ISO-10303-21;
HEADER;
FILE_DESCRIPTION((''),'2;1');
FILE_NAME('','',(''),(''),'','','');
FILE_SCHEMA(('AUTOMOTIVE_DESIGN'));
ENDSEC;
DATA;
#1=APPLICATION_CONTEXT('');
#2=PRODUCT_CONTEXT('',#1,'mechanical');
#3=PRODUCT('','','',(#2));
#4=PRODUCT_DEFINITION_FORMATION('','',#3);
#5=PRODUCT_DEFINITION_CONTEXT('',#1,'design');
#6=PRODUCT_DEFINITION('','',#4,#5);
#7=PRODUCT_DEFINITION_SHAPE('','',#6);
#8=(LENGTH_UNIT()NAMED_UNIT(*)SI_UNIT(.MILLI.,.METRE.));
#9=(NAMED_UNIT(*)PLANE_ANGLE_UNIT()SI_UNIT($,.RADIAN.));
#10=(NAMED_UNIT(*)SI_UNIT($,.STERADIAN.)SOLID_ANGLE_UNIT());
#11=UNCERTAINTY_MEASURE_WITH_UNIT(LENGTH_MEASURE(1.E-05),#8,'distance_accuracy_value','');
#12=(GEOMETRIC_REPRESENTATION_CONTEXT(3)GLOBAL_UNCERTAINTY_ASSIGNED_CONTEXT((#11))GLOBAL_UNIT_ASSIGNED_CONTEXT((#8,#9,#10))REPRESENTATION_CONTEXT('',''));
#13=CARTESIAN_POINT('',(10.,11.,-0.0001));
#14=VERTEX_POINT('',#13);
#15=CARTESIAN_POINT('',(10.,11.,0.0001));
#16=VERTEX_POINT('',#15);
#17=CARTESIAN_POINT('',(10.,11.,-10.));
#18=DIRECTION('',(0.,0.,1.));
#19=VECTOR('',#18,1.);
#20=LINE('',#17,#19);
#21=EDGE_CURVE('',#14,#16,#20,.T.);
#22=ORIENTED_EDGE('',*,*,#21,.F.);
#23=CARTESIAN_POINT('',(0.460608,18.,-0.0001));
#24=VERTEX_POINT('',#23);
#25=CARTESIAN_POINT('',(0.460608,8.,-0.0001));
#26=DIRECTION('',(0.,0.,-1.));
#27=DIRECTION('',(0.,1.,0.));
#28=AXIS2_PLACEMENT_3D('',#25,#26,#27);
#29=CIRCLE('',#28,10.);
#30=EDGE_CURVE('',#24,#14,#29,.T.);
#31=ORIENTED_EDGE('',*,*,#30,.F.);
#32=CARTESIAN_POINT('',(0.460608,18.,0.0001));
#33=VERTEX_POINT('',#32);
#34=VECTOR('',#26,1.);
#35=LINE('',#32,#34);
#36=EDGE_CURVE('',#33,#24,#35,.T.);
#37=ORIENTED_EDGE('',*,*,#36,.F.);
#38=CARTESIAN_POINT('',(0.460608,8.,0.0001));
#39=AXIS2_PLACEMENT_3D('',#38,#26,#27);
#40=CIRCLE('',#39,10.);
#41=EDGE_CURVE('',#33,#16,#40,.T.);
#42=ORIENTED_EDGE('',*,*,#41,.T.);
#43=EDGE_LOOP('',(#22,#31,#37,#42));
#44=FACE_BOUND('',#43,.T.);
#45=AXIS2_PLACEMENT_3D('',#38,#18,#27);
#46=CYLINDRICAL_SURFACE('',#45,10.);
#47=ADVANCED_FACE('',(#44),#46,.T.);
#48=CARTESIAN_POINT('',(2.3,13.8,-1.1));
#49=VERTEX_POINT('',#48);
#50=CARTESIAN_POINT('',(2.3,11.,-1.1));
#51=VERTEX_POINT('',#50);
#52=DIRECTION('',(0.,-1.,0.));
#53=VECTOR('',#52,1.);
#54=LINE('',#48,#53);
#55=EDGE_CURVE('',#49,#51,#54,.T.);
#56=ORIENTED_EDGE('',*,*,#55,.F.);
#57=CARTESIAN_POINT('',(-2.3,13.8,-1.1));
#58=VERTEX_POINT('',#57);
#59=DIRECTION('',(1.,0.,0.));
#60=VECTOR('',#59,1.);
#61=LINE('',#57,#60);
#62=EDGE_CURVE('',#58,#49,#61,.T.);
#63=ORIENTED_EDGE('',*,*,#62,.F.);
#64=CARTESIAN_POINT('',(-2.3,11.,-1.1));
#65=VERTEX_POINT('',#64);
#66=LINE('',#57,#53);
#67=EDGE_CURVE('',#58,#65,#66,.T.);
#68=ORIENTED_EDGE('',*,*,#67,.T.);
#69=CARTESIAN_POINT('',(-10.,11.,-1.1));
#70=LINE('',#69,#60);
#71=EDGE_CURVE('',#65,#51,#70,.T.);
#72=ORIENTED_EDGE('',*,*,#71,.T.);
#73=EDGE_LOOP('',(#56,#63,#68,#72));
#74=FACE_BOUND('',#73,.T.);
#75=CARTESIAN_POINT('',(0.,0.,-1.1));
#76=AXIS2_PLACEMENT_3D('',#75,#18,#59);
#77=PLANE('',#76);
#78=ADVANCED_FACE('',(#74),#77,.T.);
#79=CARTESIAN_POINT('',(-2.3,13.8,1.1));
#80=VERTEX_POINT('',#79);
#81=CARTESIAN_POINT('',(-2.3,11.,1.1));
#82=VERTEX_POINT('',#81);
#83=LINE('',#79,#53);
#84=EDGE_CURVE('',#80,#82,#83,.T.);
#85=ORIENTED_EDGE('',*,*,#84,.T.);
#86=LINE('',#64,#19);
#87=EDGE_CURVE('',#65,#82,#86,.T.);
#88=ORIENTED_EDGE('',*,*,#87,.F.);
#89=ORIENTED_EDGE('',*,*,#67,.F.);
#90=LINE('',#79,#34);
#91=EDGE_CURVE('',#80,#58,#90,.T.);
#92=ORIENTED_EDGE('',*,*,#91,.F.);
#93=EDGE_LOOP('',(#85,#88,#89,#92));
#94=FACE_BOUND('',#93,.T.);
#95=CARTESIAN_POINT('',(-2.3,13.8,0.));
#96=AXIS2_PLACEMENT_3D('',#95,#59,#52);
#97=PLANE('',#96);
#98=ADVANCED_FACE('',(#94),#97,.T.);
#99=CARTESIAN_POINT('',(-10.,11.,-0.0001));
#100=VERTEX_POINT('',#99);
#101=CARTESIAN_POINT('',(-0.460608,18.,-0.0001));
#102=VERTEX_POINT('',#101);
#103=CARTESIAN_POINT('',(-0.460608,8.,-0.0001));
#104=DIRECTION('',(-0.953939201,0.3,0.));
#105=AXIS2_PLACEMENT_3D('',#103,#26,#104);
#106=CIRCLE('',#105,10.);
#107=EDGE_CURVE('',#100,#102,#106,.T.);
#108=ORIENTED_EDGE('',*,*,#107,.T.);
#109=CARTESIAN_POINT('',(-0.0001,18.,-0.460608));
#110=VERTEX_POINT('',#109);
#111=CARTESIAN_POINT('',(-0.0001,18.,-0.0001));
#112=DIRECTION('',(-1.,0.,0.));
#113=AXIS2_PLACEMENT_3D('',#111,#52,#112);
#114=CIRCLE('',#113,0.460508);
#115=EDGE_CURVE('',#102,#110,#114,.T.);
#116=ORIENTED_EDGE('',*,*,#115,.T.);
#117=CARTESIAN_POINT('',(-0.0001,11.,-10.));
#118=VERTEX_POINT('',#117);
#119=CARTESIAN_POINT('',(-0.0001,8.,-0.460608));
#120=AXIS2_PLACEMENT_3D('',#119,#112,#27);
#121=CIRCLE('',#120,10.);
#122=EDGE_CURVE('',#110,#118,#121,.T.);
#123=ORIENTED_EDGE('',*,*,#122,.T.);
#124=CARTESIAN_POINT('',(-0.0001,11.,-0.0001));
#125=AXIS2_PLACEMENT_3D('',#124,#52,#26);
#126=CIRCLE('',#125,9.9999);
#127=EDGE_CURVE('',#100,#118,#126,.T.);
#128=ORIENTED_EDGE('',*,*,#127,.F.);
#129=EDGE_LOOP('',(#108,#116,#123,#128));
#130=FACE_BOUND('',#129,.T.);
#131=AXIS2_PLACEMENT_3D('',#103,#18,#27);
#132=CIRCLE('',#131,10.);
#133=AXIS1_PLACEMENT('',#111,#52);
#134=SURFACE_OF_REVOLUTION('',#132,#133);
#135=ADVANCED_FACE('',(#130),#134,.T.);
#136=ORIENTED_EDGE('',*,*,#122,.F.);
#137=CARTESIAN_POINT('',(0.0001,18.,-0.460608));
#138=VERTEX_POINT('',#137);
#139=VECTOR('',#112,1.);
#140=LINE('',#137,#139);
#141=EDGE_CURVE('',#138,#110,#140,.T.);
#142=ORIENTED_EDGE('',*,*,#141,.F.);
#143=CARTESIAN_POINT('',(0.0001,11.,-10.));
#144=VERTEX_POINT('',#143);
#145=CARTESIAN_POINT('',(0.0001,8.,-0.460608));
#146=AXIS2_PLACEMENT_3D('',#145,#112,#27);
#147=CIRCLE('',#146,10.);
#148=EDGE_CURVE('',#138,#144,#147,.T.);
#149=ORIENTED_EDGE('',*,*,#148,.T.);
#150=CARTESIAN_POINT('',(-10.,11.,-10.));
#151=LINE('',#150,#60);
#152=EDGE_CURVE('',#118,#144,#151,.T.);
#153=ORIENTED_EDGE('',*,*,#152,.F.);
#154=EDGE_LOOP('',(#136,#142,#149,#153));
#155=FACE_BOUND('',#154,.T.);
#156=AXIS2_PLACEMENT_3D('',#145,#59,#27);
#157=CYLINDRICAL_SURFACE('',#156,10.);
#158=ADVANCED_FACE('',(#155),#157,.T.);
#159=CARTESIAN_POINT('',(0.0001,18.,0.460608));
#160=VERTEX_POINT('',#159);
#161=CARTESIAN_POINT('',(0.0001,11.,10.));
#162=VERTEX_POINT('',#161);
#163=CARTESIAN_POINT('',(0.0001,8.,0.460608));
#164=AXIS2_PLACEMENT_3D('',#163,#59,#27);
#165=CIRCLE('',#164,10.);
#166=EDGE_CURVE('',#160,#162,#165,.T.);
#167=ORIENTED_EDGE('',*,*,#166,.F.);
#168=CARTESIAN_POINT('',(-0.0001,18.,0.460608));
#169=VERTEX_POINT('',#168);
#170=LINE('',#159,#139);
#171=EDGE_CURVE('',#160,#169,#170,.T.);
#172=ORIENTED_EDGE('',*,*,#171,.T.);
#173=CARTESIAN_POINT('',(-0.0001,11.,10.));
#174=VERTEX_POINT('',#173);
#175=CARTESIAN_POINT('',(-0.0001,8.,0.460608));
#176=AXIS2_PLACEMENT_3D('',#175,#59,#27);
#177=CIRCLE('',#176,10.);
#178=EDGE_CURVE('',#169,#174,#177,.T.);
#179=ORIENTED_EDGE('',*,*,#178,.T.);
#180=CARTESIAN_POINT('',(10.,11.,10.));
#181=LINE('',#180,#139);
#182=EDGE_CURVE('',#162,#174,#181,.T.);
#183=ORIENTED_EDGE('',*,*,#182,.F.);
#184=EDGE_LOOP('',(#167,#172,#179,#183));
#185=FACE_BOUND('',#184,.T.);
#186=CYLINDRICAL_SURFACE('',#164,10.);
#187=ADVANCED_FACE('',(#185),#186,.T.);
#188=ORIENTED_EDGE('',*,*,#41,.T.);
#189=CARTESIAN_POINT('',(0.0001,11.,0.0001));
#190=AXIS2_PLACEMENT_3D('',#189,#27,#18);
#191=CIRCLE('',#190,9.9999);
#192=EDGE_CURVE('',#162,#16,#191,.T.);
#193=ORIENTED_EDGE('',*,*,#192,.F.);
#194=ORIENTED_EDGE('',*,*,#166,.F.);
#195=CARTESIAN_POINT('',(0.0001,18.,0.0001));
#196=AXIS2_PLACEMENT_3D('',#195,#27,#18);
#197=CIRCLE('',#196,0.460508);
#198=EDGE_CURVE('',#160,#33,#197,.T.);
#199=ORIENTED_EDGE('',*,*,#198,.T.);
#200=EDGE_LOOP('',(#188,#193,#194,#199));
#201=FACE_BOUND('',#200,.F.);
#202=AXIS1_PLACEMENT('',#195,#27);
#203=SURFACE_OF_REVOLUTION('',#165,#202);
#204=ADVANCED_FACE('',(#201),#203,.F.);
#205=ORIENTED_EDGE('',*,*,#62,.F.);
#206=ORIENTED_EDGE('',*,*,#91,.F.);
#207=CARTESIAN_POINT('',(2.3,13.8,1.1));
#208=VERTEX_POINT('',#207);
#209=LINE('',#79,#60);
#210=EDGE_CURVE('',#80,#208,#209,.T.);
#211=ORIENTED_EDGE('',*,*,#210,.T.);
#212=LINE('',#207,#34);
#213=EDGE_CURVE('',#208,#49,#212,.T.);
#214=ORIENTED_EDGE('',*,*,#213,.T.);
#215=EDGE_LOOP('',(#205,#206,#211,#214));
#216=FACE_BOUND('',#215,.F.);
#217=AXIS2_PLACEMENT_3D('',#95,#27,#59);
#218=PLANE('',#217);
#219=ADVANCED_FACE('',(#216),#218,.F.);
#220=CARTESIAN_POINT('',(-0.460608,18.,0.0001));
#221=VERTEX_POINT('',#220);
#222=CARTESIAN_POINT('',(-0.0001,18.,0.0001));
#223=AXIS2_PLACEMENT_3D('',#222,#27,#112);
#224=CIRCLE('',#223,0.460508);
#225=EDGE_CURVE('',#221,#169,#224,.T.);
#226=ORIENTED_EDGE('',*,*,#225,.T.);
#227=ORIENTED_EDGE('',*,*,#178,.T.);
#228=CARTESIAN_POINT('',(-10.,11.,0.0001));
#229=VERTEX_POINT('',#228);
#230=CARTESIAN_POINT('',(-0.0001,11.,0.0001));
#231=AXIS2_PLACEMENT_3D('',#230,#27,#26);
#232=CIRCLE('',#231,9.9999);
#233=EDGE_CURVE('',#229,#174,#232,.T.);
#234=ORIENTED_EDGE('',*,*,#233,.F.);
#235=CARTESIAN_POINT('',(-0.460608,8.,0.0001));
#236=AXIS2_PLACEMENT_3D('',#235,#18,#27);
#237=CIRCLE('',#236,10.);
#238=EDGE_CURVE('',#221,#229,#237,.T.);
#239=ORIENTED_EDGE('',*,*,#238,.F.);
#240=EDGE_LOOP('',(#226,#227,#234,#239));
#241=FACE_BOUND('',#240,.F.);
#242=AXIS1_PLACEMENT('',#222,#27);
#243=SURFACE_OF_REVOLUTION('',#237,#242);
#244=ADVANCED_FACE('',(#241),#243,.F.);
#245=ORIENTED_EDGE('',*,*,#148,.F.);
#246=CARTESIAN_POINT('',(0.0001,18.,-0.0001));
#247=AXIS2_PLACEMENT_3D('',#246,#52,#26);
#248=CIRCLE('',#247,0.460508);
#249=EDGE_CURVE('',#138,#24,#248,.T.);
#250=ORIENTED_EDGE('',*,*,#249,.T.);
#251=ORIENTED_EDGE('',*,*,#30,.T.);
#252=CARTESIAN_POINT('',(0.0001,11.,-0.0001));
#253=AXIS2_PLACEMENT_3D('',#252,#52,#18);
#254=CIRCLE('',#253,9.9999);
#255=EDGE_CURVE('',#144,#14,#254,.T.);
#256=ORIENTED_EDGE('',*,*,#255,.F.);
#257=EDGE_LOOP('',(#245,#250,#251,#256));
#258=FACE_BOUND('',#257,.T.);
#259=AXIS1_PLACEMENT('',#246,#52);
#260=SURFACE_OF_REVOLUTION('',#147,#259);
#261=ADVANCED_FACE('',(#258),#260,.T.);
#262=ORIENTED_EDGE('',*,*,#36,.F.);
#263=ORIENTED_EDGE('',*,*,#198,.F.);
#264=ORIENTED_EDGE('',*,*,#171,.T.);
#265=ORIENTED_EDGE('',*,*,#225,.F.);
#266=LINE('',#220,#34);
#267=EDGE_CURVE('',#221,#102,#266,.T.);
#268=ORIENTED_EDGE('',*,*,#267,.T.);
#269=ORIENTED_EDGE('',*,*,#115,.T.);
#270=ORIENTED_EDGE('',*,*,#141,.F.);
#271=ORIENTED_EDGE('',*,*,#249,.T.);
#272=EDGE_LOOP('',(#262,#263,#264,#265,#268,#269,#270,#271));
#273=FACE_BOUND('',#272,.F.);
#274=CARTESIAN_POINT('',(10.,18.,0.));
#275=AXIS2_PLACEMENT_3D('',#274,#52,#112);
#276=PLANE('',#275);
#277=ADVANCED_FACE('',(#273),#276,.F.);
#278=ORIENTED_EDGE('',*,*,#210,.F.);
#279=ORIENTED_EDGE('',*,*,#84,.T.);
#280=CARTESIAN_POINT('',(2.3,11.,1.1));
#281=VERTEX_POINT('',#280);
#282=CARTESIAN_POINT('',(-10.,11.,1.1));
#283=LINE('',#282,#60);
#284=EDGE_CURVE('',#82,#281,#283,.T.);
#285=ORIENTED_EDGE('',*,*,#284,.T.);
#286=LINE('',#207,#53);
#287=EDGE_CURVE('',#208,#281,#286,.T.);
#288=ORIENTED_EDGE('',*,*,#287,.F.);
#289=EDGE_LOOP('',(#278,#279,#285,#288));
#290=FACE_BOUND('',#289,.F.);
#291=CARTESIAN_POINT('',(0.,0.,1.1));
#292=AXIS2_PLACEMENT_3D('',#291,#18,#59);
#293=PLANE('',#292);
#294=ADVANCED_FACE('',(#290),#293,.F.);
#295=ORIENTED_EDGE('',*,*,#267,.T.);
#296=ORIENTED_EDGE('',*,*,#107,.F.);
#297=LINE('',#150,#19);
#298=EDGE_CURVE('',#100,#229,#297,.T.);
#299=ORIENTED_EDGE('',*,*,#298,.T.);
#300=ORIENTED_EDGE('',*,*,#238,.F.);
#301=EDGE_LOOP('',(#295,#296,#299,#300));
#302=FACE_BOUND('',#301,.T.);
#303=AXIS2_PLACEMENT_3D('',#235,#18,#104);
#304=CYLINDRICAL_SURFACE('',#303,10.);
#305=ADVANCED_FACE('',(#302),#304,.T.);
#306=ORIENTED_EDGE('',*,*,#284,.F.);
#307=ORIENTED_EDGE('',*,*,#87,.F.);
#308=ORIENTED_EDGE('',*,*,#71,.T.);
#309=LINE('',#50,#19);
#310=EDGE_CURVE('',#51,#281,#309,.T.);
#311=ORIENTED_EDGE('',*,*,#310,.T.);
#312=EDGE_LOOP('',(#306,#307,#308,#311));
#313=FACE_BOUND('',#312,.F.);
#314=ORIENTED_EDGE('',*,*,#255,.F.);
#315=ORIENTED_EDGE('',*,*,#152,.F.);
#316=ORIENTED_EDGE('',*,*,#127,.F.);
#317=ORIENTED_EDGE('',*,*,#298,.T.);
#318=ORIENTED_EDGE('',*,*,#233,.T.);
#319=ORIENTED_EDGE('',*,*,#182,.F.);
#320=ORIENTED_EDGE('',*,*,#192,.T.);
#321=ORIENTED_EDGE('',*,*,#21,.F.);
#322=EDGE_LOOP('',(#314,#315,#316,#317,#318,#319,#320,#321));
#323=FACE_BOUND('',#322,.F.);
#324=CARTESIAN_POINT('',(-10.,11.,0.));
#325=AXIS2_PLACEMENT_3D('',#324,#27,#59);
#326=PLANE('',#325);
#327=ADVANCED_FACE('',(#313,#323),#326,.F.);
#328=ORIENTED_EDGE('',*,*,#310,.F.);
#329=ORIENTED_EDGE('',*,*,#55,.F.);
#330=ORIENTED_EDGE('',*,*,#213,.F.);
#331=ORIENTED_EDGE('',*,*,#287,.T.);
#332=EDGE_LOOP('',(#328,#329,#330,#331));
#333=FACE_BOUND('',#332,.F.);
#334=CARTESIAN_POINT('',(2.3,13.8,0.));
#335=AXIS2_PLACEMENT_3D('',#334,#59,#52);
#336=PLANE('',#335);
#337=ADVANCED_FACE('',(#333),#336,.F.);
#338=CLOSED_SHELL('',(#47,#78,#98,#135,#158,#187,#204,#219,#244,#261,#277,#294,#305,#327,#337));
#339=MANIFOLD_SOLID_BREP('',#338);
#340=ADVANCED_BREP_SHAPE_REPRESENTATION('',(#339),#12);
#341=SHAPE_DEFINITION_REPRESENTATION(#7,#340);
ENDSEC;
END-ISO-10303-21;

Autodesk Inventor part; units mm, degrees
ref_plane "YZ Plane" through (0, 0, 0) normal (1, 0, 0) x (0, 1, 0)
ref_plane "XZ Plane" through (0, 0, 0) normal (0, 1, 0) x (-1, 0, 0)
ref_plane "XY Plane" through (0, 0, 0) normal (0, 0, 1) x (1, 0, 0)
sketch "スケッチ1" plane through (0, 0, 0) normal (0, 0, 1) x (1, 0, 0)
  line L0 (2, 8) -> (-2, 8) construction
  line L1 (2, 8) -> (2, 13.5) construction
  line L2 (-2, 13.5) -> (2, 13.5) construction
  line L3 (-2, 8) -> (-2, 13.5) construction
  line L4 (-10, 8) -> (10, 8)
  line L5 (10, 8) -> (10, 18)
  line L6 (10, 18) -> (-10, 18)
  line L7 (-10, 18) -> (-10, 8)
  line L8 (0, -3.6) -> (0, 21.6) construction
  line L9 (-2.3, 13.8) -> (-2.3, 8)
  line L10 (-2.3, 13.8) -> (2.3, 13.8)
  line L11 (2.3, 13.8) -> (2.3, 8)
  line L12 (-10, 11) -> (10, 11)
  line L13 (-10, 14.5) -> (10, 14.5) construction
  point P0 (0, 0)
  point P1 (0, 18)
  point P2 (-2.3, 11)
  point P3 (2.3, 11)
  dimension "d0" = 20
  dimension "d1" = 10
  dimension "d2" = 0.3
  dimension "d3" = 0.3
  dimension "d4" = 0.3
  dimension "d5" = 3
  dimension "d6" = 3.5
extrude "押し出し1" add sketch "スケッチ1" along normal mid plane 20 contours L7 L6 L5 L12 L11 L10 L9 | L9 L10 L11 L12
extrude "押し出し2" cut sketch "スケッチ1" along normal mid plane 2.2 contours L9 L10 L11 L12
fillet "フィレット1" radius 10 4 edges at (-10, 14.5, 10) (-10, 14.5, -10) (10, 14.5, -10) (10, 14.5, 10)
fillet "フィレット2" radius 10 3 edges at (0, 18, 10) (-7.0711, 18, 7.0711) (-10, 18, 0)
properties part number "nob_L"
